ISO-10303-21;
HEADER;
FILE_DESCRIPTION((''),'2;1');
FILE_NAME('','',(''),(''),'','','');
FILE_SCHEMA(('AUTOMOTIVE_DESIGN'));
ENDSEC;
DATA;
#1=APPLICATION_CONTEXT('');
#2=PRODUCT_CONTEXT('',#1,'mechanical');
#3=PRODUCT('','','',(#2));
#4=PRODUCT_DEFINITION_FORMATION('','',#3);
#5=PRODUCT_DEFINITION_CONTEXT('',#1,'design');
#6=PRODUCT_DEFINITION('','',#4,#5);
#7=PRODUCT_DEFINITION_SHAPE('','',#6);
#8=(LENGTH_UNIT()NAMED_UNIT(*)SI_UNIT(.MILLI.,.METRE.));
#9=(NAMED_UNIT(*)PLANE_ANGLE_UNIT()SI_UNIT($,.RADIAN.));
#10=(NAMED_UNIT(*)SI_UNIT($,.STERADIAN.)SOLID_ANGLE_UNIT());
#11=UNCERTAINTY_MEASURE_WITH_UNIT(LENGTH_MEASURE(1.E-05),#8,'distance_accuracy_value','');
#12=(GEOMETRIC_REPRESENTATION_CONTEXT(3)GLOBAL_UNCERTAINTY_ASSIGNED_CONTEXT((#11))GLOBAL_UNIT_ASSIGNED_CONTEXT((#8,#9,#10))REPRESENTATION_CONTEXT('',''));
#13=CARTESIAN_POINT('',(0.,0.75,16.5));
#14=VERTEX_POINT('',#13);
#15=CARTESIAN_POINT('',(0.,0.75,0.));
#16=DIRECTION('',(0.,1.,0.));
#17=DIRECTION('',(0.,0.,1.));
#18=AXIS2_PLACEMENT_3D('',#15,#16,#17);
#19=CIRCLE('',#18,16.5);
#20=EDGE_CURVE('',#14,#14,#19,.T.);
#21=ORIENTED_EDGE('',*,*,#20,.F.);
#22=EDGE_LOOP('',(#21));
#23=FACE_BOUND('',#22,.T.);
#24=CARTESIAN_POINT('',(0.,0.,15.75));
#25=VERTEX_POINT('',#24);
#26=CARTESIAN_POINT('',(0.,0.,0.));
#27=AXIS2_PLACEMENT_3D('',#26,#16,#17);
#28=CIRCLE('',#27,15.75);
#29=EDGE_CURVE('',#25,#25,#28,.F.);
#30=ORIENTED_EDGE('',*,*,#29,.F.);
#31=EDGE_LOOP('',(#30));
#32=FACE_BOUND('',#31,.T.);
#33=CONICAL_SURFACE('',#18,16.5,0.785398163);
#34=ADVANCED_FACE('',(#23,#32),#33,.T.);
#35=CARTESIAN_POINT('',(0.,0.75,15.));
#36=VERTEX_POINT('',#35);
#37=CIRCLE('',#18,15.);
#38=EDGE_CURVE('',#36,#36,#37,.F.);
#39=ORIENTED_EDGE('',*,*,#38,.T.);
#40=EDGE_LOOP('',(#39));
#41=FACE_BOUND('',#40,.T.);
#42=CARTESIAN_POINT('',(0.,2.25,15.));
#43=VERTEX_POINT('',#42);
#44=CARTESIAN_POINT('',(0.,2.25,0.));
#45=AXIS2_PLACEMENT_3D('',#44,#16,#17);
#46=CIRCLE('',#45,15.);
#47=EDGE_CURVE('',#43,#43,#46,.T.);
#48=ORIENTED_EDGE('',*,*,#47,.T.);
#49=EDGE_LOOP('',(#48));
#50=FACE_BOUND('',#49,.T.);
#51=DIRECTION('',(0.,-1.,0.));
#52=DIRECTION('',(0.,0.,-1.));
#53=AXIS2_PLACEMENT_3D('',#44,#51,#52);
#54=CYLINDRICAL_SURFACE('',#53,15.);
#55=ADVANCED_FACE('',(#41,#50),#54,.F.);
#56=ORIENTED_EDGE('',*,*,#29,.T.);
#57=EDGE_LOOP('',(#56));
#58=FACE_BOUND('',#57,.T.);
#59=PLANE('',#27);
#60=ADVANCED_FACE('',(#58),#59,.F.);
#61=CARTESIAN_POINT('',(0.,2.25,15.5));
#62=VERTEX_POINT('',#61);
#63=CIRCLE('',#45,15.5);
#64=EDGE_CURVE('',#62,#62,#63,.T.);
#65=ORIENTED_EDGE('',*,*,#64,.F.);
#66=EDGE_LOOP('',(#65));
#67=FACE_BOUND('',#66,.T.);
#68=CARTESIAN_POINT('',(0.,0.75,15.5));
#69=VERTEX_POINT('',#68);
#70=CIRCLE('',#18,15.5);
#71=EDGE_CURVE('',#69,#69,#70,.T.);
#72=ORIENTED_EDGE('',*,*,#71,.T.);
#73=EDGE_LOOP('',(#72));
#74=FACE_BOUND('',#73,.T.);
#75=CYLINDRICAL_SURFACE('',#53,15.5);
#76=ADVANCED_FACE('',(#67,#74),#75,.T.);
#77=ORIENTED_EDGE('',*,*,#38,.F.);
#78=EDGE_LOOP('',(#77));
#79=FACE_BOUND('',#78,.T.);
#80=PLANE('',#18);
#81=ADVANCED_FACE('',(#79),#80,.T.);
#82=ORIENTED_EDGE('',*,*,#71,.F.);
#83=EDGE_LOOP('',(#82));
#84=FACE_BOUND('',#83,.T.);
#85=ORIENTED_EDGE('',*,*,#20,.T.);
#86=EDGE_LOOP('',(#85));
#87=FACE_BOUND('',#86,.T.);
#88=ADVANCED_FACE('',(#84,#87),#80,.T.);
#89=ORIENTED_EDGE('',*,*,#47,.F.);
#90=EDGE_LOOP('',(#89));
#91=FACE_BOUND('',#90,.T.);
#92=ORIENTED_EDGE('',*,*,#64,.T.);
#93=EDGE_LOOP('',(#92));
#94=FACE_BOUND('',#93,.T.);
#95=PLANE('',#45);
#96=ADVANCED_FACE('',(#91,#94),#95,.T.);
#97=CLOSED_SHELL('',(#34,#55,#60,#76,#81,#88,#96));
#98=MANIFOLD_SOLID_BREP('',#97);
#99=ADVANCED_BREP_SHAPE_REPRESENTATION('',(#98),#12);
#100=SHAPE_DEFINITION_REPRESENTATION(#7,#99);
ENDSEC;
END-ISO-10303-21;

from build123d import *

# Parameters (mm, degrees)
SKETCH2_R           = 16.5
BOSS_EXTRUDE1_DEPTH = 0.75
SKETCH3_R           = 15.5
SKETCH3_R_2         = 15
BOSS_EXTRUDE2_DEPTH = 1.5
CHAMFER1_SIZE       = 0.75


with BuildPart() as part:
    # Sketch2 → Boss-Extrude1 (new body)
    with BuildSketch(Plane(origin=(0, 0, 0), x_dir=(1, 0, 0), z_dir=(0, 1, 0))):
        with Locations(Location((0, 0, 0), (0, 0, 270))):
            Circle(SKETCH2_R)
    extrude(amount=BOSS_EXTRUDE1_DEPTH)

    # Sketch3 → Boss-Extrude2 (add)
    with BuildSketch(Plane(origin=(0, 0.75, 0), x_dir=(1, 0, 0), z_dir=(0, 1, 0))):
        with Locations(Location((0, 0, 0), (0, 0, 270))):
            Circle(SKETCH3_R)
        with Locations(Location((0, 0, 0), (0, 0, 270))):
            Circle(SKETCH3_R_2, mode=Mode.SUBTRACT)
    extrude(amount=BOSS_EXTRUDE2_DEPTH)

    # Chamfer1
    chamfer1_edges = [part.edges().sort_by_distance(p)[0] for p in [
        (0, 0, -16.5),
    ]]
    chamfer(chamfer1_edges, length=CHAMFER1_SIZE - 0.0001)  # a hair under: the kernel refuses the full size


solid = part.part
